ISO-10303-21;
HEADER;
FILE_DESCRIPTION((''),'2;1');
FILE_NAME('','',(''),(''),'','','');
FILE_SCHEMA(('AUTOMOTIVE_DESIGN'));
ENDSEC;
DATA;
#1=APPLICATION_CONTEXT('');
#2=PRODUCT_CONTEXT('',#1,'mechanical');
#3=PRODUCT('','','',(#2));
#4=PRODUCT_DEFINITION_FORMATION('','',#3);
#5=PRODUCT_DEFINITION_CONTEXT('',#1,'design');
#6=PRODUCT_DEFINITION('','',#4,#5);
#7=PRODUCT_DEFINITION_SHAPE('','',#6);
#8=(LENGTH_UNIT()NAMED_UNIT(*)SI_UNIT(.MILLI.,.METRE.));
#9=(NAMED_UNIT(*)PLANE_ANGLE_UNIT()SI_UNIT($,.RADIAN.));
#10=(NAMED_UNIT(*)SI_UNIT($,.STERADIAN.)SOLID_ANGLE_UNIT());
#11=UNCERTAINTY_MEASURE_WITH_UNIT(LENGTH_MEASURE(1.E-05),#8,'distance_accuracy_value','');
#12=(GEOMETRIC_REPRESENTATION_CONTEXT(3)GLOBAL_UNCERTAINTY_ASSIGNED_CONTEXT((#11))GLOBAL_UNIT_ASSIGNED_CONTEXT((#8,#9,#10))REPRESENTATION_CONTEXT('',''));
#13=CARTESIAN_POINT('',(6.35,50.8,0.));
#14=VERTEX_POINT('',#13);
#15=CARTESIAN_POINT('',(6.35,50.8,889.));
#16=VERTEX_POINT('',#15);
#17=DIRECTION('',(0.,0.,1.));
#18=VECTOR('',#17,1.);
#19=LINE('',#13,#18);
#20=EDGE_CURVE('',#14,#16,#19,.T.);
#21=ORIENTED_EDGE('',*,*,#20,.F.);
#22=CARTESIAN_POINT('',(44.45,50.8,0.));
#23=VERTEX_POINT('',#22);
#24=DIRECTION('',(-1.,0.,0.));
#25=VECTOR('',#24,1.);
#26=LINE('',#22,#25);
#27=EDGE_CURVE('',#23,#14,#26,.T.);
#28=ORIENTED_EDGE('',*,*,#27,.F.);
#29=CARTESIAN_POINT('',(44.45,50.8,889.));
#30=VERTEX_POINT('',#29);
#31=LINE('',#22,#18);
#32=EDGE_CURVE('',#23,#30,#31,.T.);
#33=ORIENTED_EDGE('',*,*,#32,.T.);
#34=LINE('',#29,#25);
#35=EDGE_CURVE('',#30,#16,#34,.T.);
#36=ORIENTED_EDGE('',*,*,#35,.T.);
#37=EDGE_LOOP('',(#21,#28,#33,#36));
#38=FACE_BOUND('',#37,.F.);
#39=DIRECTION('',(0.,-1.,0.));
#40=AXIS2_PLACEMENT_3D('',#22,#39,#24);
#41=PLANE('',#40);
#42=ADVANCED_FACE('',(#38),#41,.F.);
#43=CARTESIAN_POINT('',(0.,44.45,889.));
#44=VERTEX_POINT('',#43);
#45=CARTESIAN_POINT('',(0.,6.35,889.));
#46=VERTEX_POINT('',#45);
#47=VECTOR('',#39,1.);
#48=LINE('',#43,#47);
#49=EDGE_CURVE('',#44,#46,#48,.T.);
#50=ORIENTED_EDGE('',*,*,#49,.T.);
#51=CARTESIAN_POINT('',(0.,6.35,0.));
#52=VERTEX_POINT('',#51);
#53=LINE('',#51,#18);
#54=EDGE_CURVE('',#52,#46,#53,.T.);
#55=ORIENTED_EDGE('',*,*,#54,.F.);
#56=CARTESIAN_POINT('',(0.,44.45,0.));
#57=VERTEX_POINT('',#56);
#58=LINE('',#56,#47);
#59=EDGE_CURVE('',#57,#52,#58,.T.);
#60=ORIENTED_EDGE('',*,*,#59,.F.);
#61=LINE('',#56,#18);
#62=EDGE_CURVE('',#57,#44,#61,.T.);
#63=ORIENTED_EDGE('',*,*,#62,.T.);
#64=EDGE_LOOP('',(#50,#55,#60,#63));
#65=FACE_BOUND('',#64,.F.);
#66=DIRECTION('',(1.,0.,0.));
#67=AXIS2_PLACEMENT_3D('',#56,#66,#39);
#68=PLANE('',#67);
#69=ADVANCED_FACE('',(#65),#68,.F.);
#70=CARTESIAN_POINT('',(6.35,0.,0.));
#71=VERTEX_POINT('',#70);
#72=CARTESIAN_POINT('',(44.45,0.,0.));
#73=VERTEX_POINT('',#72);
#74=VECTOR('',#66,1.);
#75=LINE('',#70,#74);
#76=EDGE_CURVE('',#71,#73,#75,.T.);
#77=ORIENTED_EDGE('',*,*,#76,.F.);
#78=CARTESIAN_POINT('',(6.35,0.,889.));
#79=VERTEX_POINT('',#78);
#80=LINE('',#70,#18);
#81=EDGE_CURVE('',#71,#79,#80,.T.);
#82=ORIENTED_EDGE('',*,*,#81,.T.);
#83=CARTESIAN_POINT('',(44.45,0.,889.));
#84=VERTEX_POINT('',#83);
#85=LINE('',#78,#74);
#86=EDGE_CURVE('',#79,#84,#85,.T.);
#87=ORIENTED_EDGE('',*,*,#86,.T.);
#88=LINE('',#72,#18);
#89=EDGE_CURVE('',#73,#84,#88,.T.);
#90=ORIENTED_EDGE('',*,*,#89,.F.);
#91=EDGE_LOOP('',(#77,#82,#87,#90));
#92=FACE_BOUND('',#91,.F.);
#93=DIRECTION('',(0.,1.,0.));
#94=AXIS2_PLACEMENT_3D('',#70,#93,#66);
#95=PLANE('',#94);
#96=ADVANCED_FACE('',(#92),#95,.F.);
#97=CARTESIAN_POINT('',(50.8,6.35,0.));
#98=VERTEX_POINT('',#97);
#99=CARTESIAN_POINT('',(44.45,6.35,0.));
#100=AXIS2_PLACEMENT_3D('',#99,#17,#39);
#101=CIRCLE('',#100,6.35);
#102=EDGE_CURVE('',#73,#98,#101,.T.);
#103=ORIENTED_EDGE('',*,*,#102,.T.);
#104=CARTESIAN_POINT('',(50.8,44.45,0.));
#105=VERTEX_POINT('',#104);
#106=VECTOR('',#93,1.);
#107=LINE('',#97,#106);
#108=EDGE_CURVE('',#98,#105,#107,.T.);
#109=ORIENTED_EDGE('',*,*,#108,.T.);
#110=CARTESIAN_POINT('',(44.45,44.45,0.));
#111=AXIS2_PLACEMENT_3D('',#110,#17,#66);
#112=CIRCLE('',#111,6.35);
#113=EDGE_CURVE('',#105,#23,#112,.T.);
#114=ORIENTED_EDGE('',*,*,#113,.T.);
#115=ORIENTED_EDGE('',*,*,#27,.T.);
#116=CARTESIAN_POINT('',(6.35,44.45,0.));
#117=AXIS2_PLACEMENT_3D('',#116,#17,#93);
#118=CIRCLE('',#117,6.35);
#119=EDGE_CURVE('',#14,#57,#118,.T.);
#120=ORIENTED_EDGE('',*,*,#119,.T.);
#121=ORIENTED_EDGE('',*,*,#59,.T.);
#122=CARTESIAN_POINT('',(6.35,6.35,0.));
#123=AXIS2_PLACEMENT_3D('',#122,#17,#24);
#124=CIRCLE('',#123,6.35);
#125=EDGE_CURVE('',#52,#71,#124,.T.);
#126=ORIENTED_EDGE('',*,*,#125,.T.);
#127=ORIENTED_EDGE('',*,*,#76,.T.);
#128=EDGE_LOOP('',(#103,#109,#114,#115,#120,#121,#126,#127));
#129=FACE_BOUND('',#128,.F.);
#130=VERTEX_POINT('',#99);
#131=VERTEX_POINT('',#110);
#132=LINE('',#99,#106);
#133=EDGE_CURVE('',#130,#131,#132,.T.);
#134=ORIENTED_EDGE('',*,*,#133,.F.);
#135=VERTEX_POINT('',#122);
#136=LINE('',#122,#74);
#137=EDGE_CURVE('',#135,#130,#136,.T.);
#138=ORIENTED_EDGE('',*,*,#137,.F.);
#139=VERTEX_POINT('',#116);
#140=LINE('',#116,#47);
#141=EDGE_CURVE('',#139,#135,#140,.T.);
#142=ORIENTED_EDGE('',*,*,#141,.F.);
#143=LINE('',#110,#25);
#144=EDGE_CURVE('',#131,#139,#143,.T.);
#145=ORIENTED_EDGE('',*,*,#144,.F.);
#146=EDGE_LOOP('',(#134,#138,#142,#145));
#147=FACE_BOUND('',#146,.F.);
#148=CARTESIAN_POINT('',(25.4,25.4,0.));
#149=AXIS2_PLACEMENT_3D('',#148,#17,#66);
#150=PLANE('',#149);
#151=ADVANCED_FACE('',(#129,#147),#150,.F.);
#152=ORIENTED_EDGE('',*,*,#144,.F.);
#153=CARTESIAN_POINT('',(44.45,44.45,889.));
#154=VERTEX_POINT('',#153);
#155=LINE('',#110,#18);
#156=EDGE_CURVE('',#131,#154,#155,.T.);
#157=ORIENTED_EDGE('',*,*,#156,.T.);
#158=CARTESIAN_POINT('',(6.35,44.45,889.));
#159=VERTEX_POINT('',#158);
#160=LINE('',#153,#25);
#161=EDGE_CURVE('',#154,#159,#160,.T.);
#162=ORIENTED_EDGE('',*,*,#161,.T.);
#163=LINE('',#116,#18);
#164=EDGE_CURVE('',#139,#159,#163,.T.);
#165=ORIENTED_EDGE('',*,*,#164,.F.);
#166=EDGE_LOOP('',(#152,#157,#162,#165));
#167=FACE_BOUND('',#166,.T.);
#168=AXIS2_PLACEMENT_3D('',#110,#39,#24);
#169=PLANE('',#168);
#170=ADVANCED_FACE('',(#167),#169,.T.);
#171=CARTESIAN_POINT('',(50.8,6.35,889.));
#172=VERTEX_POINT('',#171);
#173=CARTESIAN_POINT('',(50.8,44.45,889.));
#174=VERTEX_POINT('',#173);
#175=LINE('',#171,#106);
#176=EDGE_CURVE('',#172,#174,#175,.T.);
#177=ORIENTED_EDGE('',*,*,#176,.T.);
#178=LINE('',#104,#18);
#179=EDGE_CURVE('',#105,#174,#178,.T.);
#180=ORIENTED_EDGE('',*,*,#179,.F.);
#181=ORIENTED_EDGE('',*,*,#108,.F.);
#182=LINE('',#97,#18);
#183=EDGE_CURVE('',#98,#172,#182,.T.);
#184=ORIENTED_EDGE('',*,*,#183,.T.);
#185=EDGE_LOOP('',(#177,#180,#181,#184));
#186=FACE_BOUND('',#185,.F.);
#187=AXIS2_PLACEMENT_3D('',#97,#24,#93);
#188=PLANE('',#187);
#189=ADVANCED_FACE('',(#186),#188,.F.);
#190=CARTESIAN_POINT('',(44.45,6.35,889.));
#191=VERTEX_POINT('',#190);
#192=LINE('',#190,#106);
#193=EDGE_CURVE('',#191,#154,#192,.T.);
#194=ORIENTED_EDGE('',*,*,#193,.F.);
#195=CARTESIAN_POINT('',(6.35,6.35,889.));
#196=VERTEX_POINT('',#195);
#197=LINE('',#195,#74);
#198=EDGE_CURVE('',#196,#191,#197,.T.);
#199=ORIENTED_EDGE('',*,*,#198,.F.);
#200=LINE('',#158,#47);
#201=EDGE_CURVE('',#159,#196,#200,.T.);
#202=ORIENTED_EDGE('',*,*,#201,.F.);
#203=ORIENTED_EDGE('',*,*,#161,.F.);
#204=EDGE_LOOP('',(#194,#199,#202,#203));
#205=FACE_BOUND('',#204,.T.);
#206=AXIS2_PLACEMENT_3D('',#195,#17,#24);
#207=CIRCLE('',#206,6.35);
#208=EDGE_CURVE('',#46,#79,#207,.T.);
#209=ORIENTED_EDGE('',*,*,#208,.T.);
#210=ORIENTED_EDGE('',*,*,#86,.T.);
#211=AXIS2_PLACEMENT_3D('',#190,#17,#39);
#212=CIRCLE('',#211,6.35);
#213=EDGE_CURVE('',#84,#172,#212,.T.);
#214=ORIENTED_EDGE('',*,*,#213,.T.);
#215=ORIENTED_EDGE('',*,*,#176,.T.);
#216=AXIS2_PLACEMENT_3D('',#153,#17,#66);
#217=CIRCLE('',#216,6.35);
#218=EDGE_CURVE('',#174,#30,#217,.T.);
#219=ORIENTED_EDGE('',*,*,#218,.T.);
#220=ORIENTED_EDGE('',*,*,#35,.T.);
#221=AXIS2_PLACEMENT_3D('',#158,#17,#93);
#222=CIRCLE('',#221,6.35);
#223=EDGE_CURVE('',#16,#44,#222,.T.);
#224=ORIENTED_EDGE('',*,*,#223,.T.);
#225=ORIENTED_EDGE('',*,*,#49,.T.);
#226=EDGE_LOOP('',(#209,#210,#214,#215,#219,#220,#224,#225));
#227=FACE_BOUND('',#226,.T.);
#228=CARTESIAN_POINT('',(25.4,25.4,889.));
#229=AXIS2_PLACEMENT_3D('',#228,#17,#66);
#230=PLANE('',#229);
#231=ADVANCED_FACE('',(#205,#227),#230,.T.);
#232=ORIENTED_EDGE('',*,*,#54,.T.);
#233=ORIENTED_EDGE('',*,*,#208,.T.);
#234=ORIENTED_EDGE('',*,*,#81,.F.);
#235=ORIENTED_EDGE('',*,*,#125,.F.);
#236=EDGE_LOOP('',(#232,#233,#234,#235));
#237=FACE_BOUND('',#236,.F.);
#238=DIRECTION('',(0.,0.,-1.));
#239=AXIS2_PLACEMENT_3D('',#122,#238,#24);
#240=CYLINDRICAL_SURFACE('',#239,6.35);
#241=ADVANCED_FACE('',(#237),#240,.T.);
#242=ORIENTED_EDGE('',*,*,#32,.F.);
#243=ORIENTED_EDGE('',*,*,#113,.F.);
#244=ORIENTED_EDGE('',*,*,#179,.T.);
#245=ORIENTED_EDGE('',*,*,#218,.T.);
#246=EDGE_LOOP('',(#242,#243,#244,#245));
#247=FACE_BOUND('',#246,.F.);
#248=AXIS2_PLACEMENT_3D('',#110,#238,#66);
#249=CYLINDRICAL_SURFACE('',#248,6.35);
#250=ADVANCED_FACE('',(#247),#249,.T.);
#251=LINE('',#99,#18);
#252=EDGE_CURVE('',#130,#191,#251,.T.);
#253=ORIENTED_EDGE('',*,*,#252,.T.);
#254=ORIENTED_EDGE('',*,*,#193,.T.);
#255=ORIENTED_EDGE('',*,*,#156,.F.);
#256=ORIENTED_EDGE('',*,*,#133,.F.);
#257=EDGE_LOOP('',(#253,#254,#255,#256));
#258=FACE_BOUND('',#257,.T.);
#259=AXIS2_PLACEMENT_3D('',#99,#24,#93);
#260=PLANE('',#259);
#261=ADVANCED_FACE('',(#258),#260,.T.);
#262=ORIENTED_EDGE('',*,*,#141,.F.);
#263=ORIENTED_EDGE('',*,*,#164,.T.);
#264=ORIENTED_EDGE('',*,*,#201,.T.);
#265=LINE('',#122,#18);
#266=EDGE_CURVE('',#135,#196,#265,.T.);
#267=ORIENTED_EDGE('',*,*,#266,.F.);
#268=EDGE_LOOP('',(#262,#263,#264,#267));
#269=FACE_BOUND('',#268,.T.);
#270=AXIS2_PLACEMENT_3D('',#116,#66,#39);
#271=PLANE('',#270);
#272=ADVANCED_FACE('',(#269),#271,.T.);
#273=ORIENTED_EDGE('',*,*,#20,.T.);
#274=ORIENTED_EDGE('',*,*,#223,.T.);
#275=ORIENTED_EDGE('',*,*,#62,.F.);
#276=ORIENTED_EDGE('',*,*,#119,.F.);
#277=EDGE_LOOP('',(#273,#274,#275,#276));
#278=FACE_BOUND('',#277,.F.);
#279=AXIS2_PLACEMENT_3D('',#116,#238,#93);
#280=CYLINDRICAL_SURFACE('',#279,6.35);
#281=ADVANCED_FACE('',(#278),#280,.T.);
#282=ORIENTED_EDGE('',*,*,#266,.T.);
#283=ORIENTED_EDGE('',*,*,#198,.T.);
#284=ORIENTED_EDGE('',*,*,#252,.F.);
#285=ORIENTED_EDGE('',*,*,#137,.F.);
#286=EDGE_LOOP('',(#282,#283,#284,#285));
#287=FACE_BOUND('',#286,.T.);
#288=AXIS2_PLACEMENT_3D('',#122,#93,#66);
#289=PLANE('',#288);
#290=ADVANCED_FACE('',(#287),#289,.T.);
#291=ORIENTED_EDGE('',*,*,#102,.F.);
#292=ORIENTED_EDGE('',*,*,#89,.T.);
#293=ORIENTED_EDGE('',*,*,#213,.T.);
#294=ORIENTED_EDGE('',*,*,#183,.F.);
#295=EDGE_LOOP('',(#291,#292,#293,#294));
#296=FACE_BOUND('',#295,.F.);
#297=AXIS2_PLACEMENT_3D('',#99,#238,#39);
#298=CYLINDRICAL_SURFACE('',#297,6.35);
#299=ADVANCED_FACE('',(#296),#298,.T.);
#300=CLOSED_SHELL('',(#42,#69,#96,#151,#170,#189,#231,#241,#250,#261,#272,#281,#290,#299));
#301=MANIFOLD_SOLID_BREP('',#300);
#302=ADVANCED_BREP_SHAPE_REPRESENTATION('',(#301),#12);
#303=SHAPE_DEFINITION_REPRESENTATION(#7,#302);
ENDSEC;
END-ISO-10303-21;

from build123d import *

# Parameters (mm, degrees)
F1_DEPTH = 889
F2_T     = 6.35


# Not quite as in the source:
# - a shell that OpenCascade refuses in one call is made with other operations: the cavity is built on its own and cut out


with BuildPart() as f1:
    # F0 (on Top) → F1 (new body)
    with BuildSketch(Plane.XY):
        with BuildLine():
            ThreePointArc((0, 6.35), (1.8598719395, 1.8598719395), (6.35, 0))
            Line((6.35, 0), (44.45, 0))
            ThreePointArc((44.45, 0), (48.9401280605, 1.8598719395), (50.8, 6.35))
            Line((50.8, 6.35), (50.8, 44.45))
            ThreePointArc((50.8, 44.45), (48.9401280605, 48.9401280605), (44.45, 50.8))
            Line((44.45, 50.8), (6.35, 50.8))
            ThreePointArc((6.35, 50.8), (1.8598719395, 48.9401280605), (0, 44.45))
            Line((0, 44.45), (0, 6.35))
        make_face()
    extrude(amount=F1_DEPTH)

    # F2: shell of thickness 6.35, made by hand


with BuildPart() as f2_core1:
    # F2_t2: copy of F1
    add(f1.part)

    # the walls: a layer under each face that stays
    f2_faces = [f2_core1.faces().sort_by_distance(p)[0] for p in [
        (0, 25.4, 444.5),
        (25.4, 0, 444.5),
        (50.8, 25.4, 444.5),
        (25.4, 50.8, 444.5),
    ]]
    thicken(f2_faces, amount=-F2_T, mode=Mode.SUBTRACT)


with BuildPart() as f1_1:
    add(f1.part)

    # what is left inside the walls is the cavity
    f2_cavity = [f2_core1.part.solids().sort_by_distance(p)[0] for p in [
        (6.4135, 25.4, 592.666667),
    ]]
    add(f2_cavity, mode=Mode.SUBTRACT)


solid = f1_1.part
